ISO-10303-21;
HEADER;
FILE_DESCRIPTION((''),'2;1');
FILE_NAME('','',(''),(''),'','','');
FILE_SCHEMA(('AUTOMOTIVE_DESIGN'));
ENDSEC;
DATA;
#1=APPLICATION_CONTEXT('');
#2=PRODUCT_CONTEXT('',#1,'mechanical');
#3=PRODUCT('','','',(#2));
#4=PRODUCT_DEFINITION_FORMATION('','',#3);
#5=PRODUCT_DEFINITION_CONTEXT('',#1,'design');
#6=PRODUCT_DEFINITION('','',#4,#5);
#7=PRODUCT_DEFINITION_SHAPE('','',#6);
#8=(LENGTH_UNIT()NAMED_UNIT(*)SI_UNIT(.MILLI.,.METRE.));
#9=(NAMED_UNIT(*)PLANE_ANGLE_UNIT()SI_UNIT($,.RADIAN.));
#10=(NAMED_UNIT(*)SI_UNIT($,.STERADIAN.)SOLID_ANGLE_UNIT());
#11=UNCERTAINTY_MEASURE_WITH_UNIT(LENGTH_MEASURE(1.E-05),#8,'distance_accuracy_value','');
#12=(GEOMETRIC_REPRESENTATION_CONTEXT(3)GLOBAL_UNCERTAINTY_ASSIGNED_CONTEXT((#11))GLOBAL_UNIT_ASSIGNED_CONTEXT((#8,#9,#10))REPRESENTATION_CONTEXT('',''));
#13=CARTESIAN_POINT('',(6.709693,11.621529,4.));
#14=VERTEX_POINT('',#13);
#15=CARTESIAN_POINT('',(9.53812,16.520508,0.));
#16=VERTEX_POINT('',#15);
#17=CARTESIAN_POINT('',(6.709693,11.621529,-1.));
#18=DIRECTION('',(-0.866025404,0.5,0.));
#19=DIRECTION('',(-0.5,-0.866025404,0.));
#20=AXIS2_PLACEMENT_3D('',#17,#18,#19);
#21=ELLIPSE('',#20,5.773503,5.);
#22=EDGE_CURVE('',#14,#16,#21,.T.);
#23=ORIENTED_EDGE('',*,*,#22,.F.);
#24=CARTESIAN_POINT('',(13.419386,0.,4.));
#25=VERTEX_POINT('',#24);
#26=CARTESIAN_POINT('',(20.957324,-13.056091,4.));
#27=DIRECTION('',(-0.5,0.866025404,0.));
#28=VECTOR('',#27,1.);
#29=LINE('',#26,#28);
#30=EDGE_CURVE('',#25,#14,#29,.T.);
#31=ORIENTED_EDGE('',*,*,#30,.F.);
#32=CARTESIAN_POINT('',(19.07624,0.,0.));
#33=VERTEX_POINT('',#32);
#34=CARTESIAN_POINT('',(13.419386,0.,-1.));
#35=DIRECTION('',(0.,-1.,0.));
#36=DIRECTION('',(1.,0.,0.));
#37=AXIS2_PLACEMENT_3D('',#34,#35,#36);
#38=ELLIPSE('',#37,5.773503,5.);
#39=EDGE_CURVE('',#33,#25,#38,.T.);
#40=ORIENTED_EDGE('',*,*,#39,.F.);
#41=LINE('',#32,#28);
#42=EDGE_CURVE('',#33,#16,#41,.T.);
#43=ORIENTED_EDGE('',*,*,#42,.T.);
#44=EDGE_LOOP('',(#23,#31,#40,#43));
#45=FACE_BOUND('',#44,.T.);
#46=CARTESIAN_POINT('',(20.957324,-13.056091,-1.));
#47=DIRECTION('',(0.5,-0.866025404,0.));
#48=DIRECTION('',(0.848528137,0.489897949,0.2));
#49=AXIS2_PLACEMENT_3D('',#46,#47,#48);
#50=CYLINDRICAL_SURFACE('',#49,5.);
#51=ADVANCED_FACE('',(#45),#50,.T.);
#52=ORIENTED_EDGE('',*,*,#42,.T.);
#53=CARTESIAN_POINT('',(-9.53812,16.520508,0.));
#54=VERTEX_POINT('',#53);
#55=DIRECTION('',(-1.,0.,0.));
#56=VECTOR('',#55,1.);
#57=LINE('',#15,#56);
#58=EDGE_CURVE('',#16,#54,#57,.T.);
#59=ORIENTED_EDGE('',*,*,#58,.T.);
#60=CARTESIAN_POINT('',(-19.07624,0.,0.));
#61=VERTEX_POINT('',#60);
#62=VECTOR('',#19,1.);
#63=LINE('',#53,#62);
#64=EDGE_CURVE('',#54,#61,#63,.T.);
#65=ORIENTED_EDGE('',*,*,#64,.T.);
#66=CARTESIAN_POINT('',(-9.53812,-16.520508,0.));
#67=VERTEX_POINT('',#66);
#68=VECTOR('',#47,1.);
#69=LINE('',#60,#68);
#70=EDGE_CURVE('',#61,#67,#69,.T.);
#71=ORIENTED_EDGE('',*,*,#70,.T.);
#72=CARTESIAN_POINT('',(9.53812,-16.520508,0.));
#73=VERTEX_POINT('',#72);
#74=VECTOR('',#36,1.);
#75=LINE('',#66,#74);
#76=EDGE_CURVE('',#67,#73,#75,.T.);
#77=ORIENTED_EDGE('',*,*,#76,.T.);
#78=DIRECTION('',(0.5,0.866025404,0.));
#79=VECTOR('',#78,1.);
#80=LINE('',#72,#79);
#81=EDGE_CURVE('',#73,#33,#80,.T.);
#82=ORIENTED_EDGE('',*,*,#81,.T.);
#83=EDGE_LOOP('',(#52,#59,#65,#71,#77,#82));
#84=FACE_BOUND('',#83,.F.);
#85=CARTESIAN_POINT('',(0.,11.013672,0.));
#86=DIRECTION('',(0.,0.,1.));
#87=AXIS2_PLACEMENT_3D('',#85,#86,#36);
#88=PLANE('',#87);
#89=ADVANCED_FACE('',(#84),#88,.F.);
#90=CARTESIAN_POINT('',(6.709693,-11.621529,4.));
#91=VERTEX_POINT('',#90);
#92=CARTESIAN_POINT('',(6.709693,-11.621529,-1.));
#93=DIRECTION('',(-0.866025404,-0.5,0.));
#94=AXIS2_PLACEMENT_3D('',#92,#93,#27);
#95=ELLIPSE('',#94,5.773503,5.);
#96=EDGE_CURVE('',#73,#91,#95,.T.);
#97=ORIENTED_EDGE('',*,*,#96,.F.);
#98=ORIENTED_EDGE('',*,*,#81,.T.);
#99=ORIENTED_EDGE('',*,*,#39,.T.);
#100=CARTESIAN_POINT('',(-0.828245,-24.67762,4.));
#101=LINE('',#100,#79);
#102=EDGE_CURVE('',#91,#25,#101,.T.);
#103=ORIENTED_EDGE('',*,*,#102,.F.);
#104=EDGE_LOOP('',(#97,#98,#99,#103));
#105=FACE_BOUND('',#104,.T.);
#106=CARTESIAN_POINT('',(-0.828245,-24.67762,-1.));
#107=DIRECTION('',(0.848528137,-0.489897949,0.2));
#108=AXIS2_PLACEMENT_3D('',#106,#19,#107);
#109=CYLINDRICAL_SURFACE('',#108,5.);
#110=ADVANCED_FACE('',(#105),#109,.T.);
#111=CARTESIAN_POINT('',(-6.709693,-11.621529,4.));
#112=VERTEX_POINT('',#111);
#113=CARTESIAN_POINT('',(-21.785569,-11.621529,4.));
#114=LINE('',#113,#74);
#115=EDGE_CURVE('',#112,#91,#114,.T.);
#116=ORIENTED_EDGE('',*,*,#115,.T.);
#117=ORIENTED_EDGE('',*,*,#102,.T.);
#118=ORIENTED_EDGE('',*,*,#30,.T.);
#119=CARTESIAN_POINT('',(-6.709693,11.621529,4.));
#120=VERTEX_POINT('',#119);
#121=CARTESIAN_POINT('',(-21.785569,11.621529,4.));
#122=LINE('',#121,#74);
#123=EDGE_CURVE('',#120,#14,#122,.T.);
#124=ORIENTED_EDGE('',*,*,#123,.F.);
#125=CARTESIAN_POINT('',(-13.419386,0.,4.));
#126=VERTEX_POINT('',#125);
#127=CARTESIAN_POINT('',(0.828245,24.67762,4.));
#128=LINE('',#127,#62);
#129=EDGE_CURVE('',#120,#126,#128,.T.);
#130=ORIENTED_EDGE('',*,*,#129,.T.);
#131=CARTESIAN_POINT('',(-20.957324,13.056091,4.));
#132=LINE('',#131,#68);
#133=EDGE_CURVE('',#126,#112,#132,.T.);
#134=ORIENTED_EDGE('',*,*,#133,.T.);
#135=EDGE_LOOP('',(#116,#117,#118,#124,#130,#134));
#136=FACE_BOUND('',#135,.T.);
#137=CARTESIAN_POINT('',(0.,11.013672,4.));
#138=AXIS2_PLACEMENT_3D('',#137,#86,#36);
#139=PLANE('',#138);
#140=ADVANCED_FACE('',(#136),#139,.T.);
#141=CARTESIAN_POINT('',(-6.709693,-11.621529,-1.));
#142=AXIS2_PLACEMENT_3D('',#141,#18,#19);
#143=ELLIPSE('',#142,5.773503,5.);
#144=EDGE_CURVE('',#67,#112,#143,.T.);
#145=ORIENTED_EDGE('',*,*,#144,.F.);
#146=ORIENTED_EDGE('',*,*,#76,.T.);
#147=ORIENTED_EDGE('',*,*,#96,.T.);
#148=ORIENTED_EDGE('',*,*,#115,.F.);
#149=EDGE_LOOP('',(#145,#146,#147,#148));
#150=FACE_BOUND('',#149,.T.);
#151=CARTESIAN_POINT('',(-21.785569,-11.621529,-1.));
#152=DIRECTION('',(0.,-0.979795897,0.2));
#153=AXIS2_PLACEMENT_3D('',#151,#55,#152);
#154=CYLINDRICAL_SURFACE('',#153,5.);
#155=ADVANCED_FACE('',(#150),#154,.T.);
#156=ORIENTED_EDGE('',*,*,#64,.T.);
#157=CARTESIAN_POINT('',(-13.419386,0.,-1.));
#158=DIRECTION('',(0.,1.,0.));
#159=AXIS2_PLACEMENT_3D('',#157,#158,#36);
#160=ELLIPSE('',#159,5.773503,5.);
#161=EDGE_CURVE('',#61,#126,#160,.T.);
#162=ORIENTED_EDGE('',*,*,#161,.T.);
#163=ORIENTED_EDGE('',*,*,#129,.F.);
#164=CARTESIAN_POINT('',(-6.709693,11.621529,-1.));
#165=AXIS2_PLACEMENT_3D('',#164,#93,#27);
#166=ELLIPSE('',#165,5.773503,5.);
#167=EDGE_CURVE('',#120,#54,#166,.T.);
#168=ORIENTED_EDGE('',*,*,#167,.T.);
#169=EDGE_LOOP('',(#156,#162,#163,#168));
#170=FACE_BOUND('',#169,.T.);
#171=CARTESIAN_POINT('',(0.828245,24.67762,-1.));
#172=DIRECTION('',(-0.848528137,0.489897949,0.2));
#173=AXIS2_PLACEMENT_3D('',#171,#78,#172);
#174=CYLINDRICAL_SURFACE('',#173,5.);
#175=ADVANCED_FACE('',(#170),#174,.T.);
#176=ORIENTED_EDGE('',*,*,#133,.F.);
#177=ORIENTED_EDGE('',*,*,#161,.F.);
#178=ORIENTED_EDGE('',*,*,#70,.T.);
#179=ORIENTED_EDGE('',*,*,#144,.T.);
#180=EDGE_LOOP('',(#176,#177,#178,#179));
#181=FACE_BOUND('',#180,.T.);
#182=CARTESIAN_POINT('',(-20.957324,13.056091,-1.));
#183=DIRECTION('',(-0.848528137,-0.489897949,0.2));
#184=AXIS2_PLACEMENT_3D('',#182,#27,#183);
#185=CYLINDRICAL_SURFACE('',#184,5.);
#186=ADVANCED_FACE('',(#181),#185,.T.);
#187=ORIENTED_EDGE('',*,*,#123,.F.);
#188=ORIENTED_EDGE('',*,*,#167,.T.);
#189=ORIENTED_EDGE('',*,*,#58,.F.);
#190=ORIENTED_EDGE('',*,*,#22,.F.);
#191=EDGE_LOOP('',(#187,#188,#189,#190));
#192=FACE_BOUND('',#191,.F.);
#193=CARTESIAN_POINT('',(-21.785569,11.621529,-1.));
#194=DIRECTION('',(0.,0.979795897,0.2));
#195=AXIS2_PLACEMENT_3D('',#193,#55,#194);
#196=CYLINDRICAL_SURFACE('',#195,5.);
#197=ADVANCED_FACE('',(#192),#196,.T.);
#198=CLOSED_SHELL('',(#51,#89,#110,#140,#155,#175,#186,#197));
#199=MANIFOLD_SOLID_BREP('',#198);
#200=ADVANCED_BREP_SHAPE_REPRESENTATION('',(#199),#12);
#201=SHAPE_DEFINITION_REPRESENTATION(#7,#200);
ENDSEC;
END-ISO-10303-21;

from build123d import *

# Parameters (mm, degrees)
F1_DEPTH    = 4
F2_T1_DEPTH = 43.5711374279
F2_T3_DEPTH = 43.5711374279
F2_T5_DEPTH = 43.5711374279
F2_T7_DEPTH = 43.5711374279
F2_T9_DEPTH = 43.5711374279


# Not quite as in the source:
# - a fillet or chamfer that OpenCascade refuses, or shapes differently, is made with other operations: its cross-section is extruded or revolved along the edge and cut away or added


with BuildPart() as f1:
    # F0 (on Top) → F1 (new body)
    with BuildSketch(Plane.XY):
        Polygon((-9.53812, 16.5205084487), (0, 0), (9.53812, 16.5205084487), align=None)
        Polygon((-19.07624, 0), (0, 0), (-9.53812, 16.5205084487), align=None)
        Polygon((-9.53812, -16.5205084487), (0, 0), (-19.07624, 0), align=None)
        Polygon((9.53812, -16.5205084487), (0, 0), (-9.53812, -16.5205084487), align=None)
        Polygon((19.07624, 0), (0, 0), (9.53812, -16.5205084487), align=None)
        Polygon((9.53812, 16.5205084487), (0, 0), (19.07624, 0), align=None)
    extrude(amount=F1_DEPTH)

    # F2: fillet of radius 5 on 6 edges, made by hand

    # F2_s2 → F2_t1 (cut)
    with BuildSketch(Plane.YZ.offset(-21.7855687139)):
        with BuildLine():
            ThreePointArc((16.5205084487, 0), (14.7838066233, 2.8729833462), (11.6215289631, 4))
            Line((11.6215289631, 4), (16.5205084487, 4))
            Line((16.5205084487, 4), (16.5205084487, 0))
        make_face()
        with BuildLine():
            ThreePointArc((-16.5205084487, 0), (-14.7838066233, 2.8729833462), (-11.6215289631, 4))
            Line((-11.6215289631, 4), (-16.5205084487, 4))
            Line((-16.5205084487, 4), (-16.5205084487, 0))
        make_face()
    extrude(amount=F2_T1_DEPTH, mode=Mode.SUBTRACT)

    # F2_s4 → F2_t3 (cut)
    with BuildSketch(Plane(origin=(10.892784357, 18.8668559422, 0), x_dir=(0, 0, 1), z_dir=(-0.5, -0.8660254038, 0))):
        with BuildLine():
            ThreePointArc((0, 16.5205084487), (2.8729833462, 14.7838066233), (4, 11.6215289631))
            Line((4, 11.6215289631), (4, 16.5205084487))
            Line((4, 16.5205084487), (0, 16.5205084487))
        make_face()
    extrude(amount=F2_T3_DEPTH, mode=Mode.SUBTRACT)

    # F2_s6 → F2_t5 (cut)
    with BuildSketch(Plane(origin=(-10.892784357, 18.8668559422, 0), x_dir=(0, 0, 1), z_dir=(0.5, -0.8660254038, 0))):
        with BuildLine():
            ThreePointArc((0, 16.5205084487), (2.8729833462, 14.7838066233), (4, 11.6215289631))
            Line((4, 11.6215289631), (4, 16.5205084487))
            Line((4, 16.5205084487), (0, 16.5205084487))
        make_face()
    extrude(amount=F2_T5_DEPTH, mode=Mode.SUBTRACT)

    # F2_s8 → F2_t7 (cut)
    with BuildSketch(Plane(origin=(10.892784357, -18.8668559422, 0), x_dir=(0, 0, 1), z_dir=(-0.5, 0.8660254038, 0))):
        with BuildLine():
            ThreePointArc((0, 16.5205084487), (2.8729833462, 14.7838066233), (4, 11.6215289631))
            Line((4, 11.6215289631), (4, 16.5205084487))
            Line((4, 16.5205084487), (0, 16.5205084487))
        make_face()
    extrude(amount=F2_T7_DEPTH, mode=Mode.SUBTRACT)

    # F2_s10 → F2_t9 (cut)
    with BuildSketch(Plane(origin=(-10.892784357, -18.8668559422, 0), x_dir=(0, 0, 1), z_dir=(0.5, 0.8660254038, 0))):
        with BuildLine():
            ThreePointArc((0, 16.5205084487), (2.8729833462, 14.7838066233), (4, 11.6215289631))
            Line((4, 11.6215289631), (4, 16.5205084487))
            Line((4, 16.5205084487), (0, 16.5205084487))
        make_face()
    extrude(amount=F2_T9_DEPTH, mode=Mode.SUBTRACT)


solid = f1.part
